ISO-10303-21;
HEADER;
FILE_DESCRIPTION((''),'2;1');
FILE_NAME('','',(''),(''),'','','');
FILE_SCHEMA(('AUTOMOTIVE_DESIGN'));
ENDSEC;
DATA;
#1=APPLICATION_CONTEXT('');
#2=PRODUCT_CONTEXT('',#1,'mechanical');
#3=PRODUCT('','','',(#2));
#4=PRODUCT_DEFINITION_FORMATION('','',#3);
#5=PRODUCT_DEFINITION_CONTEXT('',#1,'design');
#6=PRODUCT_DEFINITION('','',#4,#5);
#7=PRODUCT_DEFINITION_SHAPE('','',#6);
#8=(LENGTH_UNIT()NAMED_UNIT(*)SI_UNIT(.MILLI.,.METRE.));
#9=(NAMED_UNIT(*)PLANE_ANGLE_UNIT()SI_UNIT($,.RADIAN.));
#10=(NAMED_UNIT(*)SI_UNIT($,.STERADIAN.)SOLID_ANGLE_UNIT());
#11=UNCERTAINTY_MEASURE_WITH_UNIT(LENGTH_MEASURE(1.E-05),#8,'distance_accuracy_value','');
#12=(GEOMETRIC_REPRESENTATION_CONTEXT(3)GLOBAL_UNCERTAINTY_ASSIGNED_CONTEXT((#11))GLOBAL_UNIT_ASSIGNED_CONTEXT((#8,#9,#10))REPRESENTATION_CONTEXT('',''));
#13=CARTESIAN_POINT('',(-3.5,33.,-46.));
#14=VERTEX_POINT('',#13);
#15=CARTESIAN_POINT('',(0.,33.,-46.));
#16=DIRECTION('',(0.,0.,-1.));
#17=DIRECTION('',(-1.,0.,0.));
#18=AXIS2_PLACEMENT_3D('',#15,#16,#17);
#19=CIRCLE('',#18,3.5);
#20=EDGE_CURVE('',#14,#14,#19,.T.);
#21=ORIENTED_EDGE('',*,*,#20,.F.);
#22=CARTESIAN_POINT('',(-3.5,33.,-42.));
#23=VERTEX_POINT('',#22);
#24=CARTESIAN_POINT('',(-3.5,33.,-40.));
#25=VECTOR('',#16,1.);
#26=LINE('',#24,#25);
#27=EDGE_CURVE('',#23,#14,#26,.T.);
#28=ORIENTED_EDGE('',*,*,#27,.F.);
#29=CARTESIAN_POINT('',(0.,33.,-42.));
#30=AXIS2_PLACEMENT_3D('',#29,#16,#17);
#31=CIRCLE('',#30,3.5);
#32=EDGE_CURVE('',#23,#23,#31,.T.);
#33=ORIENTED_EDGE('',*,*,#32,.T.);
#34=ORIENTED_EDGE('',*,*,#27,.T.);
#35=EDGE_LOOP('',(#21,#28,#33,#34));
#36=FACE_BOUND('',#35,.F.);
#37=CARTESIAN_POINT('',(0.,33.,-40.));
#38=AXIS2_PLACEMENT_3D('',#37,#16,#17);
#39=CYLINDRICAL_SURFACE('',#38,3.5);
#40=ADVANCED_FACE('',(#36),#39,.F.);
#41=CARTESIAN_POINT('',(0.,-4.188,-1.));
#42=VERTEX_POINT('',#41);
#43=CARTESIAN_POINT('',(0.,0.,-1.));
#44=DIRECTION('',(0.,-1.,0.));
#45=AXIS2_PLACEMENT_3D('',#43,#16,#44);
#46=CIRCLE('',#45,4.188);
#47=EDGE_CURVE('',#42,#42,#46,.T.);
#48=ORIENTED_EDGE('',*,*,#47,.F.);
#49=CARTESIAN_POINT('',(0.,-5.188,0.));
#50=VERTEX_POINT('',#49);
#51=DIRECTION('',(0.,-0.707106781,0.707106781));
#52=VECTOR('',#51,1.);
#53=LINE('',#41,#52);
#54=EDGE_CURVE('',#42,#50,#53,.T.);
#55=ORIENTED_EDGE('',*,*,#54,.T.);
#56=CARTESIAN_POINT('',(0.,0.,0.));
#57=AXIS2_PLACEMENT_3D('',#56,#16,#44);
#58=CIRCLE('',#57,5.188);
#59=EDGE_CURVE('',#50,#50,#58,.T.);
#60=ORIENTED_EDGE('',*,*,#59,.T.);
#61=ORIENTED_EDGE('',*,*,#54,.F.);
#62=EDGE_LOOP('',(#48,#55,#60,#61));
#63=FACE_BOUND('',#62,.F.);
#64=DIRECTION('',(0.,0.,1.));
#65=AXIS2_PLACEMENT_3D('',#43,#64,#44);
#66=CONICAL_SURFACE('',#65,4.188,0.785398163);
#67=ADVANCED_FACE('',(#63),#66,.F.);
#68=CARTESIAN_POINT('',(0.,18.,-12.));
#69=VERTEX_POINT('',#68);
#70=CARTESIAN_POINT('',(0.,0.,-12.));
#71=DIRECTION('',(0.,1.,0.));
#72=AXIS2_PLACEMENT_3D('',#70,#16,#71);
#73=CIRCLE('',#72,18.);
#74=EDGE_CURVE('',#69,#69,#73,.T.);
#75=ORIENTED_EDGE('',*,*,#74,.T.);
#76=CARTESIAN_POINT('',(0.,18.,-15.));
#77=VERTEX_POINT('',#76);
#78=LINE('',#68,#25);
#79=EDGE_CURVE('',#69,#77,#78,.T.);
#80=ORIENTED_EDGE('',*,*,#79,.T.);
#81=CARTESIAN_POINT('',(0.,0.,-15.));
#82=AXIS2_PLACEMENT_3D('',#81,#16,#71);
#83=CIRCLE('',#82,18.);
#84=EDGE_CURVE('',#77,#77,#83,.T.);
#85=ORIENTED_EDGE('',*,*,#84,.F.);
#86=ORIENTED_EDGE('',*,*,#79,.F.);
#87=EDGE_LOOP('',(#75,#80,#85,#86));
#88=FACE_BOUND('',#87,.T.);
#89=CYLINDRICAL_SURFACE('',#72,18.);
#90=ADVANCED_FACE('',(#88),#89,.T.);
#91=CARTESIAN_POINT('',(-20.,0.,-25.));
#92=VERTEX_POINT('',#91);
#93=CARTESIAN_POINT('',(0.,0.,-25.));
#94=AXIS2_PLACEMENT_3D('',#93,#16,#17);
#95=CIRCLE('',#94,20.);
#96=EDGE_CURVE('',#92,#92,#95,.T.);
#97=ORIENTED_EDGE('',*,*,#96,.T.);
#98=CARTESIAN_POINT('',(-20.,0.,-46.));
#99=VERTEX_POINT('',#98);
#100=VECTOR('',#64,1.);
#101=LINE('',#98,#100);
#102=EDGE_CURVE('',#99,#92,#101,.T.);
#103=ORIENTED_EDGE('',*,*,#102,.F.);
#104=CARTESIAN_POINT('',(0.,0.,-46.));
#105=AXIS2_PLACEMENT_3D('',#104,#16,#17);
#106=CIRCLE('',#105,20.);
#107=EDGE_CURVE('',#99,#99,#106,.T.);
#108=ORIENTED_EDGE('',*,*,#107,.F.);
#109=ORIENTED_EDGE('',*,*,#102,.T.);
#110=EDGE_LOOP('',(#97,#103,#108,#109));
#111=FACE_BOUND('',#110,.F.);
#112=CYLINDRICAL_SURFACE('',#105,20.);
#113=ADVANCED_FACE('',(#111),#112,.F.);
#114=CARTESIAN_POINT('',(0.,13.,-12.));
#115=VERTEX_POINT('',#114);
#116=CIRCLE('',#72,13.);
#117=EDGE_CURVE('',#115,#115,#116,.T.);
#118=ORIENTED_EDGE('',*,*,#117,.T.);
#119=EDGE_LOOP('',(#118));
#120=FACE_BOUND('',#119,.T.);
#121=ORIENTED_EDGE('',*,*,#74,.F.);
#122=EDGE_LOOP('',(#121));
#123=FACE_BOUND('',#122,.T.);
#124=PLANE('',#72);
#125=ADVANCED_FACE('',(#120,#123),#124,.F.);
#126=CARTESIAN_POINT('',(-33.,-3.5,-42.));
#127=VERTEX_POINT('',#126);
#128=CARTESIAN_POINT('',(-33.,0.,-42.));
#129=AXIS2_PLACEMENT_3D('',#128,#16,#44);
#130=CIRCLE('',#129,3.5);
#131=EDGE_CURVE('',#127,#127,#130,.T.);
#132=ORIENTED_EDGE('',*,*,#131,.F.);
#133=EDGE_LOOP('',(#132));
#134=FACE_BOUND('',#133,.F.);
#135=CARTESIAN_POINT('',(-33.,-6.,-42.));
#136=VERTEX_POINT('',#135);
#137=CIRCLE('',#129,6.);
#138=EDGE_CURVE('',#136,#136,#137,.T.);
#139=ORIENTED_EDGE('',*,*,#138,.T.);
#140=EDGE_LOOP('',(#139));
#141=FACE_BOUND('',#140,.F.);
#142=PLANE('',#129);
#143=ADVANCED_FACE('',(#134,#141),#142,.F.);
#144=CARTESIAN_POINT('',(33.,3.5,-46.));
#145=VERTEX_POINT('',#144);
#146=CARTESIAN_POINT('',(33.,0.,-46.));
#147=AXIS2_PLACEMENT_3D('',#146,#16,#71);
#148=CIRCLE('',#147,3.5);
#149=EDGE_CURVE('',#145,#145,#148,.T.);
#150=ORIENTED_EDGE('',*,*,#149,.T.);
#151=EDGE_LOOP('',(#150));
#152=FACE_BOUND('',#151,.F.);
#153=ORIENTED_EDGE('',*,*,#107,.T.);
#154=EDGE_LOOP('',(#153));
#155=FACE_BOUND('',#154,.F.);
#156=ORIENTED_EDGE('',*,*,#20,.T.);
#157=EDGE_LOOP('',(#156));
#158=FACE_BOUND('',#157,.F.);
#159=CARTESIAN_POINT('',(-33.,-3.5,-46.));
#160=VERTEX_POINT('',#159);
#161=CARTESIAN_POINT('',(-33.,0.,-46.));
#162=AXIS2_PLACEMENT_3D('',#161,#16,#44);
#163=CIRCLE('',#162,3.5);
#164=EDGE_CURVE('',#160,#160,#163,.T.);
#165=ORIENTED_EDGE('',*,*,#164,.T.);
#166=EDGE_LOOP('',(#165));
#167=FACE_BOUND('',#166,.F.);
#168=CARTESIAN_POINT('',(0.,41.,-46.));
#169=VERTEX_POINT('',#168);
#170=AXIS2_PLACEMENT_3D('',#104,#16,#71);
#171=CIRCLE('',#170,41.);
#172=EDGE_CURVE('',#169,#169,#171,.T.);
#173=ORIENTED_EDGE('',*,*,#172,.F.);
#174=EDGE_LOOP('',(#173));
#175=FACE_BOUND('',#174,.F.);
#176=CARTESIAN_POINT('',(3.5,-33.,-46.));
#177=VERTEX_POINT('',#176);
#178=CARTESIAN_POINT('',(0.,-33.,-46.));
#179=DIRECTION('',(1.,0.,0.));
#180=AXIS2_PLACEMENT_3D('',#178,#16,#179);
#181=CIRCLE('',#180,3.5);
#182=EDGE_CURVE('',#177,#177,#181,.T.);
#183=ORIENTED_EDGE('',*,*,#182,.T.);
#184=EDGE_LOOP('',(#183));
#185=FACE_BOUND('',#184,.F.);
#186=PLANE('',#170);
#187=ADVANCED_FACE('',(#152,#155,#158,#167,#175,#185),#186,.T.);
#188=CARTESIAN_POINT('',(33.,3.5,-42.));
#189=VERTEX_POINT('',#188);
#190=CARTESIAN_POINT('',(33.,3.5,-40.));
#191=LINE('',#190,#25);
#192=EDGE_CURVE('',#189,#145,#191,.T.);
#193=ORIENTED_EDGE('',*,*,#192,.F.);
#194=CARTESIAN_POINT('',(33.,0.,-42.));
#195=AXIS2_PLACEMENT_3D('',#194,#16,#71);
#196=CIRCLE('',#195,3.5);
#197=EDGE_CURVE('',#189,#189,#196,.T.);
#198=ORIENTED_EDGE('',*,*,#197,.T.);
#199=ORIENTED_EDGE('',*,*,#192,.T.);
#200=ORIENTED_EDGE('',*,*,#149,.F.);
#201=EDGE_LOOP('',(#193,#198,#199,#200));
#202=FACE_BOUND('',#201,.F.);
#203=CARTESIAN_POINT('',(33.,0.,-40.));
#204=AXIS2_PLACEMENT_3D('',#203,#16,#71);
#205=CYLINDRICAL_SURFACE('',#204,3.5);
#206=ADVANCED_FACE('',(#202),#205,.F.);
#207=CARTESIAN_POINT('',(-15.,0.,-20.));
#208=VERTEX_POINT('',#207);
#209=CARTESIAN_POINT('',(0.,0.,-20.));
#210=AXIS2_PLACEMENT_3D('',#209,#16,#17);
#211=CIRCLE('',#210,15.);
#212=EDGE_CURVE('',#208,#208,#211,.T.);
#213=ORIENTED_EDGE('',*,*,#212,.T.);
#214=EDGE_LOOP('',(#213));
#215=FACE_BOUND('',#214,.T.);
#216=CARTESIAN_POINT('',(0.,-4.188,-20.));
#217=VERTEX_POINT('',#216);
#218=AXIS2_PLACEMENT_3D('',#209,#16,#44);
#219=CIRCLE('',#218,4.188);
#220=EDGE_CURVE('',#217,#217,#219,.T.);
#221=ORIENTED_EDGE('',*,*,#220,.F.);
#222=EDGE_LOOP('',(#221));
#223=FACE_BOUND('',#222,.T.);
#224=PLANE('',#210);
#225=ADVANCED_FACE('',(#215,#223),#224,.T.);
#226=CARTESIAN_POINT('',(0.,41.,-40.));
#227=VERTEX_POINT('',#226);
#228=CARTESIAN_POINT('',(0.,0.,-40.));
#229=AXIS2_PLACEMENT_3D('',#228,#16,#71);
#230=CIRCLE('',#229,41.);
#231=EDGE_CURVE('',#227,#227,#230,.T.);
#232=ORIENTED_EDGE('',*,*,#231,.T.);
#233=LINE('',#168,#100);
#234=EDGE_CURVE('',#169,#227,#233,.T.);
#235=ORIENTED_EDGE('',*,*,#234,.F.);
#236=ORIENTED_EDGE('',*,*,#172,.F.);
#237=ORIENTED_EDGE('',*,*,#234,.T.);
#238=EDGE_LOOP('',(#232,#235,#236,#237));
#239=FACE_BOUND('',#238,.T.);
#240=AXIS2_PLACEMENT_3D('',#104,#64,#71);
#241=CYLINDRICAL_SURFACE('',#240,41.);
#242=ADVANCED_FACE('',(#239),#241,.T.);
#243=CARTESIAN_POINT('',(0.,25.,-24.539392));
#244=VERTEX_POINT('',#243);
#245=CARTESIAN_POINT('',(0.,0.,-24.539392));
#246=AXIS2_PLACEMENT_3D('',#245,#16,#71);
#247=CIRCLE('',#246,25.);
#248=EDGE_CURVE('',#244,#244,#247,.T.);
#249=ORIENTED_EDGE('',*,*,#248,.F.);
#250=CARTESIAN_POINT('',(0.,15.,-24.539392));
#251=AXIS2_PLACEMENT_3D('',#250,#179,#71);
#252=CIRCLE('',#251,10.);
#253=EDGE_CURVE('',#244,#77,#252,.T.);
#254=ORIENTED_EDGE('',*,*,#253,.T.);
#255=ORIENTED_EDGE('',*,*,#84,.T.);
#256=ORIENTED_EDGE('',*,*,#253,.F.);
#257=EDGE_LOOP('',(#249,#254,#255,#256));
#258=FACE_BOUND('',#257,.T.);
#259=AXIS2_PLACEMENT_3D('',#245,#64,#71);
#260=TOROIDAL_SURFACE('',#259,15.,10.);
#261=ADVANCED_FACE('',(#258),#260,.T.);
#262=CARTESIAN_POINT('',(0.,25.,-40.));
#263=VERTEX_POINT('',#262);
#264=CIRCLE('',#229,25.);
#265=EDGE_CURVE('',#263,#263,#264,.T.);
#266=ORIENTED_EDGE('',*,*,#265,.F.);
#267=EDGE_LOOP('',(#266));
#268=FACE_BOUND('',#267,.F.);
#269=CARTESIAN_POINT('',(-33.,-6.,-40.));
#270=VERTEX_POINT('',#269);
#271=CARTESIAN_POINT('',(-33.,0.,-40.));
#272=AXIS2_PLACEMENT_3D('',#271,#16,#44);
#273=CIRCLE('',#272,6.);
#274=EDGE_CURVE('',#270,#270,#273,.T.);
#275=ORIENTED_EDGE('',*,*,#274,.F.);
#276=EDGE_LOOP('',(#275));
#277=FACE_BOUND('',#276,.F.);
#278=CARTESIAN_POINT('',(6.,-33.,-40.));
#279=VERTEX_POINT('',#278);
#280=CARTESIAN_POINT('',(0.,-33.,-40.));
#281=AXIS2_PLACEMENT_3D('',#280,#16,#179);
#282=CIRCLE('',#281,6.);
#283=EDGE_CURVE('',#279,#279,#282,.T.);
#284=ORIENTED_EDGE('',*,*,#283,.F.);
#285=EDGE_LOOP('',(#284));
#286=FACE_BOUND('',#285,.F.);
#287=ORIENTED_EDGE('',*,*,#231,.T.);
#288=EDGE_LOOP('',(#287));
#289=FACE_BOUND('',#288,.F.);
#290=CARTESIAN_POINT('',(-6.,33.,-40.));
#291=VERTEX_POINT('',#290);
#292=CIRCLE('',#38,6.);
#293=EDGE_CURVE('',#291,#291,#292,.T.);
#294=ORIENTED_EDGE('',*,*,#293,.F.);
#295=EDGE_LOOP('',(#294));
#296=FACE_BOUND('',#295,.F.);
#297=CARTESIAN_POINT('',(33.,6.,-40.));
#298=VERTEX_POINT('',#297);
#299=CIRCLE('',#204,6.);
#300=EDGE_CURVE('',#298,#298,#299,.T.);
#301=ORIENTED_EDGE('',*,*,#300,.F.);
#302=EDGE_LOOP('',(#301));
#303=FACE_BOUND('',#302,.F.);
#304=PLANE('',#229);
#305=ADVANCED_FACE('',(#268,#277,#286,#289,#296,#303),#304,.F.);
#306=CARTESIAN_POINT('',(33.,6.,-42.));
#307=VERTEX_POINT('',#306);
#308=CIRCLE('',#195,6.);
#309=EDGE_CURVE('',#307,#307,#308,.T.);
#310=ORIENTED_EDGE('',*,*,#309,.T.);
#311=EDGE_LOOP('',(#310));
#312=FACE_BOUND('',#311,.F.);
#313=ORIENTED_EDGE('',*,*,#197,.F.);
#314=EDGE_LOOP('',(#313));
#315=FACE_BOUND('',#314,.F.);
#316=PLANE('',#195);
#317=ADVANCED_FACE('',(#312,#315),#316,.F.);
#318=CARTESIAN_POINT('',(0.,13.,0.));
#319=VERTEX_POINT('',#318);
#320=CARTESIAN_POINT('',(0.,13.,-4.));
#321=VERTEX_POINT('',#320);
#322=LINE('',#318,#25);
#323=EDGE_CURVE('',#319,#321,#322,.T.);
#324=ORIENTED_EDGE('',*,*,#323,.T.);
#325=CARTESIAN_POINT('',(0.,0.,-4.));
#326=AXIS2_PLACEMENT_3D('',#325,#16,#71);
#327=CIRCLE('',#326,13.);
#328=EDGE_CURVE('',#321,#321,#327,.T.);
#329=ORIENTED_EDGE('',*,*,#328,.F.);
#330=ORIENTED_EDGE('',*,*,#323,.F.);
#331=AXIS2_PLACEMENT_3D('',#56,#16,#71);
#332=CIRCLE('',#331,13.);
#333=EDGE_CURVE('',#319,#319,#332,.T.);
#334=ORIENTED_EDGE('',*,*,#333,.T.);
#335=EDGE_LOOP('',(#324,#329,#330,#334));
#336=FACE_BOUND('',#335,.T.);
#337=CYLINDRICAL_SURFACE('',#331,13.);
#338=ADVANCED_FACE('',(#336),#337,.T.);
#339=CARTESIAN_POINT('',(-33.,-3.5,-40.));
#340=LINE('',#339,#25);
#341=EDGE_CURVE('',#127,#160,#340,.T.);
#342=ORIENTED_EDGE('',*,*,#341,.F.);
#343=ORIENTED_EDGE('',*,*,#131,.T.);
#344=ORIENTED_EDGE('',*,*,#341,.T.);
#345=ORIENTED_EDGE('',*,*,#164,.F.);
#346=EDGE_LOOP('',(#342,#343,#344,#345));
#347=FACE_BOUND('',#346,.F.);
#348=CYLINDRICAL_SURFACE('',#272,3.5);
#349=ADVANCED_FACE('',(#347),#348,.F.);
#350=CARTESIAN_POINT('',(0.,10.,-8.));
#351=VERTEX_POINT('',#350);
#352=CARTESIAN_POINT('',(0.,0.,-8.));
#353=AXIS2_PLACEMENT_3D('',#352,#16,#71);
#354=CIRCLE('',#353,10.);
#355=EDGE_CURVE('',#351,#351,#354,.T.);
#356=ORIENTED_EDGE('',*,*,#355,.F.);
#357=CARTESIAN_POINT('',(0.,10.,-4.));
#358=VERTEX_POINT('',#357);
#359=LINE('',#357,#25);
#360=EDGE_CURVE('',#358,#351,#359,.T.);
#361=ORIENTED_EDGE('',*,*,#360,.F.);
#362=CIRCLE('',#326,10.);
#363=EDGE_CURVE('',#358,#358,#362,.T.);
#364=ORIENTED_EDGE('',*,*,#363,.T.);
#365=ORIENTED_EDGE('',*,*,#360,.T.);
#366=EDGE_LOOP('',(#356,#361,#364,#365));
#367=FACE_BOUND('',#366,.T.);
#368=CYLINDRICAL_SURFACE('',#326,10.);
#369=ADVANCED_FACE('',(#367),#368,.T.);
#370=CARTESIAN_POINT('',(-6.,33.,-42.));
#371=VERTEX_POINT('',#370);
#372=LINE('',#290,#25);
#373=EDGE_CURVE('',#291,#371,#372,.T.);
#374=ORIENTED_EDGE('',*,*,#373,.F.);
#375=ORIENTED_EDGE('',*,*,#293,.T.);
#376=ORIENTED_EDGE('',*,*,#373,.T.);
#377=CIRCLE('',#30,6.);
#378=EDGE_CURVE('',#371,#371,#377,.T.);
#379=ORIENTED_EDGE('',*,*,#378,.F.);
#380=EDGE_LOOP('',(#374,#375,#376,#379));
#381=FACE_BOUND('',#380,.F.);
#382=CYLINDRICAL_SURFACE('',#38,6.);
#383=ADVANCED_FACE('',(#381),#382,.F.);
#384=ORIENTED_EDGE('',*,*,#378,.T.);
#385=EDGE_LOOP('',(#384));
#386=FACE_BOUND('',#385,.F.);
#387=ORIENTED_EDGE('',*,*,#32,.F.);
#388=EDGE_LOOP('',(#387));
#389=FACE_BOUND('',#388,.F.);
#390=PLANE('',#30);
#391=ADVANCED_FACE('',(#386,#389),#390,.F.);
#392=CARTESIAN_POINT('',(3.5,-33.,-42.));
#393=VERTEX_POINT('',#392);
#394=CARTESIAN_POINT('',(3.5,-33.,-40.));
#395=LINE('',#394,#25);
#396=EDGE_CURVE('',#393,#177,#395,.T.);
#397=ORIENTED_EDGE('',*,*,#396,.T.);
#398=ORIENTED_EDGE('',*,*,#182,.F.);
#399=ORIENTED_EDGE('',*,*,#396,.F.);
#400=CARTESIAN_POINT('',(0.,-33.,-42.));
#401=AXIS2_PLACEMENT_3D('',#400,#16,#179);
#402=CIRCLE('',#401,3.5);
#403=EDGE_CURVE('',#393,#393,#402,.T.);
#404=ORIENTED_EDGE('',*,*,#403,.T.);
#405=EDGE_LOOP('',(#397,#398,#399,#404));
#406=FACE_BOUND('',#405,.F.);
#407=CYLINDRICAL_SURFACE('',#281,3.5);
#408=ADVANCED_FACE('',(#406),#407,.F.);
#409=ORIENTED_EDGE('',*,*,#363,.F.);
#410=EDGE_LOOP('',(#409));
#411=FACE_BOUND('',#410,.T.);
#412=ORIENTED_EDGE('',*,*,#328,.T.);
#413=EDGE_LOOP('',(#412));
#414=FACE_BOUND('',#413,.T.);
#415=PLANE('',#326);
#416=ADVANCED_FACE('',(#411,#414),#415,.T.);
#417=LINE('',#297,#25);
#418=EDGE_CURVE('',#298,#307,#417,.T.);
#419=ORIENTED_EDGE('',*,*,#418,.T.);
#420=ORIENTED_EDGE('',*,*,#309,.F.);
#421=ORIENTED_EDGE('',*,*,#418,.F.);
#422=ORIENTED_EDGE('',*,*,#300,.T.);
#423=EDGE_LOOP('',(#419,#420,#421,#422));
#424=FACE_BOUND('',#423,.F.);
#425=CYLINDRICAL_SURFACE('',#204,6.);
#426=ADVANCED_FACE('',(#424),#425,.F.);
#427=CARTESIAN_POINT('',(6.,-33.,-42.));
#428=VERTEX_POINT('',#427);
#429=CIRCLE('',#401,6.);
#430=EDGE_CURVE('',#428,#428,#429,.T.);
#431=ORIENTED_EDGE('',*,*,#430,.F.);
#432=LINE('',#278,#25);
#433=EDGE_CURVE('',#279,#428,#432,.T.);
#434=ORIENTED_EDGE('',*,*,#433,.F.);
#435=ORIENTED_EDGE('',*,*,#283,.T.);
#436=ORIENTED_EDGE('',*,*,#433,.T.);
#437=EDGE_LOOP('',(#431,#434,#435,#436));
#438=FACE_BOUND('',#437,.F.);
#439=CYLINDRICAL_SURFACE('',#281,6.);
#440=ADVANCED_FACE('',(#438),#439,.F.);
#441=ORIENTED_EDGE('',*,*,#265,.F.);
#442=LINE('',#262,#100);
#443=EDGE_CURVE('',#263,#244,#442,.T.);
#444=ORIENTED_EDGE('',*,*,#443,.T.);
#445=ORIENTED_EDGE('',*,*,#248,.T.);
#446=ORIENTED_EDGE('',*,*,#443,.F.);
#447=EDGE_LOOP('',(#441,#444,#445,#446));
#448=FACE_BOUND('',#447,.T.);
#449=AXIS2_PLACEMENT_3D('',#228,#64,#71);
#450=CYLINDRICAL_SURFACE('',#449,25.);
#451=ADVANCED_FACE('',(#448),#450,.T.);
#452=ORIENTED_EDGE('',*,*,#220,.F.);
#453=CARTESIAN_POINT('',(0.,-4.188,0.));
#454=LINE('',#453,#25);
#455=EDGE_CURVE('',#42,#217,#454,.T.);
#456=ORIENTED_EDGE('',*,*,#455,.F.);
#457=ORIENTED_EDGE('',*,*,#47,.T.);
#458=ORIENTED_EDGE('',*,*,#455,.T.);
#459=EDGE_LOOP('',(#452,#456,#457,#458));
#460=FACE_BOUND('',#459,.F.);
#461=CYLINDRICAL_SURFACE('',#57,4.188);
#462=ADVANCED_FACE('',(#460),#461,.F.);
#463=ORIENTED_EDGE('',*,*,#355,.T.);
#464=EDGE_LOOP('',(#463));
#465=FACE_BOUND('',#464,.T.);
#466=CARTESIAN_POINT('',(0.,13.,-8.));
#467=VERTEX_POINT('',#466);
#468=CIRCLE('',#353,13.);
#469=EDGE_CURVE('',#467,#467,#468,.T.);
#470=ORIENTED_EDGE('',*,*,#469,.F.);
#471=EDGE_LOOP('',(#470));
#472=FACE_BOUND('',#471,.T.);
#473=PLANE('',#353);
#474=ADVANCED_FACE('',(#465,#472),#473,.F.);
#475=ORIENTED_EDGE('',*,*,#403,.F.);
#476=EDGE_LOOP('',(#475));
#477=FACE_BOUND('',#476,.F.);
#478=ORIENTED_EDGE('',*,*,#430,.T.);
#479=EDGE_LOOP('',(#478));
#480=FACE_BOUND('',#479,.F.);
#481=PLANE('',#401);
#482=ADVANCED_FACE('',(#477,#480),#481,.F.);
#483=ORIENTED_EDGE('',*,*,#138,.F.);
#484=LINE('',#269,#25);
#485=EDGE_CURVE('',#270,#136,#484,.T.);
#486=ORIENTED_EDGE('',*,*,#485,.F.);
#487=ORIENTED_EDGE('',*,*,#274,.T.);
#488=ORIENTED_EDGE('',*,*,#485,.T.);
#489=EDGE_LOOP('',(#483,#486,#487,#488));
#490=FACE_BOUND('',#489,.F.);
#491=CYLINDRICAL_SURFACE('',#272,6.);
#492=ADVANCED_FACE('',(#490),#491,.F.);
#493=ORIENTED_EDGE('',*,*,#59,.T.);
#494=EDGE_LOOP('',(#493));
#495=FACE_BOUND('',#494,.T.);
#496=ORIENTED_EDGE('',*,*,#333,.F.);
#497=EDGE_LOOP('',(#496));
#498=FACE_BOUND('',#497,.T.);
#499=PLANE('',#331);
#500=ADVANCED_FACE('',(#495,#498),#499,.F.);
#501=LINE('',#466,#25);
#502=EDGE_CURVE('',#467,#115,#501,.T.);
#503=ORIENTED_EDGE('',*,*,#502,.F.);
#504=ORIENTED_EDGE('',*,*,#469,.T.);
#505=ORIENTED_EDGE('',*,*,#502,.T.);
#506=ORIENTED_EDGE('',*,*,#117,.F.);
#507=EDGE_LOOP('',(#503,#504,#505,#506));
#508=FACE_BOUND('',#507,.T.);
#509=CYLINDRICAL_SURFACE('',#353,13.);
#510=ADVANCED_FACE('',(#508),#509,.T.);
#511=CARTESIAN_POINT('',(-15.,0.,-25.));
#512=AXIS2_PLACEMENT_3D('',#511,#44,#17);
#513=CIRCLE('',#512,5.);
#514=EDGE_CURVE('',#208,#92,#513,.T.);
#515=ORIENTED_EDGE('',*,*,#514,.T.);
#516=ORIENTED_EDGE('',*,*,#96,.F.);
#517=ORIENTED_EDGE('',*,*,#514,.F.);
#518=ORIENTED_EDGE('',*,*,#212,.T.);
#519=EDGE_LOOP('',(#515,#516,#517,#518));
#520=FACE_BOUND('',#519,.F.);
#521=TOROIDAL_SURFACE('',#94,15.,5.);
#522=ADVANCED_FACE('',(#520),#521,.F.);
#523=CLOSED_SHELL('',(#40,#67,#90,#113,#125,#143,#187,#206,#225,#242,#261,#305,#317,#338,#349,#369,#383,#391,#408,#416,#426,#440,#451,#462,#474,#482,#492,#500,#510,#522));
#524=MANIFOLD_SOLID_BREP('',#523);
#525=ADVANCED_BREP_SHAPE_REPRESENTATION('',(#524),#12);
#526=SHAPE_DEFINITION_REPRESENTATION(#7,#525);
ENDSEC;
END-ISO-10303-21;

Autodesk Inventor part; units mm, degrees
ref_plane "YZ Plane" through (0, 0, 0) normal (1, 0, 0) x (0, 1, 0)
ref_plane "XZ Plane" through (0, 0, 0) normal (0, 1, 0) x (-1, 0, 0)
ref_plane "XY Plane" through (0, 0, 0) normal (0, 0, 1) x (1, 0, 0)
sketch "草图1" plane through (0, 0, 0) normal (1, 0, 0) x (0, 1, 0)
  line L0 (0, 0) -> (13, 0)
  line L1 (13, 0) -> (13, -4)
  line L2 (13, -4) -> (10, -4)
  line L3 (10, -4) -> (10, -8)
  line L4 (10, -8) -> (13, -8)
  line L5 (13, -8) -> (13, -12)
  line L6 (13, -12) -> (18, -12)
  line L7 (18, -12) -> (18, -15)
  line L8 (0, 0) -> (0, -15)
  line L9 (18, -15) -> (25, -15)
  line L10 (0, 0) -> (0, -46)
  line L11 (0, -46) -> (41, -46)
  line L12 (41, -46) -> (41, -40)
  line L13 (41, -40) -> (25, -40)
  line L14 (25, -40) -> (25, -15)
  dimension "d0" = 13
  dimension "d1" = 4
  dimension "d2" = 3
  dimension "d3" = 4
  dimension "d4" = 3
  dimension "d5" = 4
  dimension "d6" = 5
  dimension "d7" = 3
  dimension "d8" = 25
  dimension "d9" = 46
  dimension "d10" = 41
  dimension "d11" = 6
  dimension "d12" = 16
revolve "旋转1" add sketch "草图1" angle 360 about axis through (0, 0, 0) along (0, 0, -1)
sketch "草图2" plane through (0, 0, 0) normal (0, 0, 1) x (1, 0, 0)
  circle A0 centre (0, 0) radius 13 projected
hole "孔1" at (0, 0, 0) direction (0, 0, -1) diameter 8.376 end through all thread size "M10x1.5" designation "M10" class "6H" standard "GB Metric profile"
sketch "草图3" plane through (0, 0, -46) normal (0, 0, -1) x (-1, 0, 0)
  circle A0 centre (0, 0) radius 4.188 projected
  circle A1 centre (0, 0) radius 41 projected
  circle A2 centre (0, 0) radius 20
  dimension "d21" = 40
extrude "拉伸1" cut sketch "草图3" against normal blind 26 contours A2
fillet "圆角1" radius 5 1 edges at (20, 0, -20)
fillet "圆角2" radius 10 1 edges at (0, -25, -15)
sketch "草图4" plane through (0, 0, -40) normal (0, 0, 1) x (1, 0, 0)
  circle A0 centre (0, 0) radius 41 projected
  circle A1 centre (0, 0) radius 33
  point P0 (-33, 0)
  dimension "d26" = 66
hole "孔2" at (-33, 0, -40) direction (0, 0, -1) diameter 7 end through all
sketch "草图5" plane through (0, 0, -40) normal (0, 0, 1) x (1, 0, 0)
  circle A0 centre (-33, 0) radius 3.5 projected
  point P0 (0, 0)
hole "孔3" at (-33, 0, -40) direction (0, 0, -1) diameter 12 depth 2
pattern_circular "环形阵列1" count 4 over 360 about axis through (0, 0, -124.7558) along (0, 0, 1) of "孔3", "孔2"
chamfer "倒角1" distance 1 angle 45 1 edges at (0, 4.188, 0)
properties material "灰口铁"
